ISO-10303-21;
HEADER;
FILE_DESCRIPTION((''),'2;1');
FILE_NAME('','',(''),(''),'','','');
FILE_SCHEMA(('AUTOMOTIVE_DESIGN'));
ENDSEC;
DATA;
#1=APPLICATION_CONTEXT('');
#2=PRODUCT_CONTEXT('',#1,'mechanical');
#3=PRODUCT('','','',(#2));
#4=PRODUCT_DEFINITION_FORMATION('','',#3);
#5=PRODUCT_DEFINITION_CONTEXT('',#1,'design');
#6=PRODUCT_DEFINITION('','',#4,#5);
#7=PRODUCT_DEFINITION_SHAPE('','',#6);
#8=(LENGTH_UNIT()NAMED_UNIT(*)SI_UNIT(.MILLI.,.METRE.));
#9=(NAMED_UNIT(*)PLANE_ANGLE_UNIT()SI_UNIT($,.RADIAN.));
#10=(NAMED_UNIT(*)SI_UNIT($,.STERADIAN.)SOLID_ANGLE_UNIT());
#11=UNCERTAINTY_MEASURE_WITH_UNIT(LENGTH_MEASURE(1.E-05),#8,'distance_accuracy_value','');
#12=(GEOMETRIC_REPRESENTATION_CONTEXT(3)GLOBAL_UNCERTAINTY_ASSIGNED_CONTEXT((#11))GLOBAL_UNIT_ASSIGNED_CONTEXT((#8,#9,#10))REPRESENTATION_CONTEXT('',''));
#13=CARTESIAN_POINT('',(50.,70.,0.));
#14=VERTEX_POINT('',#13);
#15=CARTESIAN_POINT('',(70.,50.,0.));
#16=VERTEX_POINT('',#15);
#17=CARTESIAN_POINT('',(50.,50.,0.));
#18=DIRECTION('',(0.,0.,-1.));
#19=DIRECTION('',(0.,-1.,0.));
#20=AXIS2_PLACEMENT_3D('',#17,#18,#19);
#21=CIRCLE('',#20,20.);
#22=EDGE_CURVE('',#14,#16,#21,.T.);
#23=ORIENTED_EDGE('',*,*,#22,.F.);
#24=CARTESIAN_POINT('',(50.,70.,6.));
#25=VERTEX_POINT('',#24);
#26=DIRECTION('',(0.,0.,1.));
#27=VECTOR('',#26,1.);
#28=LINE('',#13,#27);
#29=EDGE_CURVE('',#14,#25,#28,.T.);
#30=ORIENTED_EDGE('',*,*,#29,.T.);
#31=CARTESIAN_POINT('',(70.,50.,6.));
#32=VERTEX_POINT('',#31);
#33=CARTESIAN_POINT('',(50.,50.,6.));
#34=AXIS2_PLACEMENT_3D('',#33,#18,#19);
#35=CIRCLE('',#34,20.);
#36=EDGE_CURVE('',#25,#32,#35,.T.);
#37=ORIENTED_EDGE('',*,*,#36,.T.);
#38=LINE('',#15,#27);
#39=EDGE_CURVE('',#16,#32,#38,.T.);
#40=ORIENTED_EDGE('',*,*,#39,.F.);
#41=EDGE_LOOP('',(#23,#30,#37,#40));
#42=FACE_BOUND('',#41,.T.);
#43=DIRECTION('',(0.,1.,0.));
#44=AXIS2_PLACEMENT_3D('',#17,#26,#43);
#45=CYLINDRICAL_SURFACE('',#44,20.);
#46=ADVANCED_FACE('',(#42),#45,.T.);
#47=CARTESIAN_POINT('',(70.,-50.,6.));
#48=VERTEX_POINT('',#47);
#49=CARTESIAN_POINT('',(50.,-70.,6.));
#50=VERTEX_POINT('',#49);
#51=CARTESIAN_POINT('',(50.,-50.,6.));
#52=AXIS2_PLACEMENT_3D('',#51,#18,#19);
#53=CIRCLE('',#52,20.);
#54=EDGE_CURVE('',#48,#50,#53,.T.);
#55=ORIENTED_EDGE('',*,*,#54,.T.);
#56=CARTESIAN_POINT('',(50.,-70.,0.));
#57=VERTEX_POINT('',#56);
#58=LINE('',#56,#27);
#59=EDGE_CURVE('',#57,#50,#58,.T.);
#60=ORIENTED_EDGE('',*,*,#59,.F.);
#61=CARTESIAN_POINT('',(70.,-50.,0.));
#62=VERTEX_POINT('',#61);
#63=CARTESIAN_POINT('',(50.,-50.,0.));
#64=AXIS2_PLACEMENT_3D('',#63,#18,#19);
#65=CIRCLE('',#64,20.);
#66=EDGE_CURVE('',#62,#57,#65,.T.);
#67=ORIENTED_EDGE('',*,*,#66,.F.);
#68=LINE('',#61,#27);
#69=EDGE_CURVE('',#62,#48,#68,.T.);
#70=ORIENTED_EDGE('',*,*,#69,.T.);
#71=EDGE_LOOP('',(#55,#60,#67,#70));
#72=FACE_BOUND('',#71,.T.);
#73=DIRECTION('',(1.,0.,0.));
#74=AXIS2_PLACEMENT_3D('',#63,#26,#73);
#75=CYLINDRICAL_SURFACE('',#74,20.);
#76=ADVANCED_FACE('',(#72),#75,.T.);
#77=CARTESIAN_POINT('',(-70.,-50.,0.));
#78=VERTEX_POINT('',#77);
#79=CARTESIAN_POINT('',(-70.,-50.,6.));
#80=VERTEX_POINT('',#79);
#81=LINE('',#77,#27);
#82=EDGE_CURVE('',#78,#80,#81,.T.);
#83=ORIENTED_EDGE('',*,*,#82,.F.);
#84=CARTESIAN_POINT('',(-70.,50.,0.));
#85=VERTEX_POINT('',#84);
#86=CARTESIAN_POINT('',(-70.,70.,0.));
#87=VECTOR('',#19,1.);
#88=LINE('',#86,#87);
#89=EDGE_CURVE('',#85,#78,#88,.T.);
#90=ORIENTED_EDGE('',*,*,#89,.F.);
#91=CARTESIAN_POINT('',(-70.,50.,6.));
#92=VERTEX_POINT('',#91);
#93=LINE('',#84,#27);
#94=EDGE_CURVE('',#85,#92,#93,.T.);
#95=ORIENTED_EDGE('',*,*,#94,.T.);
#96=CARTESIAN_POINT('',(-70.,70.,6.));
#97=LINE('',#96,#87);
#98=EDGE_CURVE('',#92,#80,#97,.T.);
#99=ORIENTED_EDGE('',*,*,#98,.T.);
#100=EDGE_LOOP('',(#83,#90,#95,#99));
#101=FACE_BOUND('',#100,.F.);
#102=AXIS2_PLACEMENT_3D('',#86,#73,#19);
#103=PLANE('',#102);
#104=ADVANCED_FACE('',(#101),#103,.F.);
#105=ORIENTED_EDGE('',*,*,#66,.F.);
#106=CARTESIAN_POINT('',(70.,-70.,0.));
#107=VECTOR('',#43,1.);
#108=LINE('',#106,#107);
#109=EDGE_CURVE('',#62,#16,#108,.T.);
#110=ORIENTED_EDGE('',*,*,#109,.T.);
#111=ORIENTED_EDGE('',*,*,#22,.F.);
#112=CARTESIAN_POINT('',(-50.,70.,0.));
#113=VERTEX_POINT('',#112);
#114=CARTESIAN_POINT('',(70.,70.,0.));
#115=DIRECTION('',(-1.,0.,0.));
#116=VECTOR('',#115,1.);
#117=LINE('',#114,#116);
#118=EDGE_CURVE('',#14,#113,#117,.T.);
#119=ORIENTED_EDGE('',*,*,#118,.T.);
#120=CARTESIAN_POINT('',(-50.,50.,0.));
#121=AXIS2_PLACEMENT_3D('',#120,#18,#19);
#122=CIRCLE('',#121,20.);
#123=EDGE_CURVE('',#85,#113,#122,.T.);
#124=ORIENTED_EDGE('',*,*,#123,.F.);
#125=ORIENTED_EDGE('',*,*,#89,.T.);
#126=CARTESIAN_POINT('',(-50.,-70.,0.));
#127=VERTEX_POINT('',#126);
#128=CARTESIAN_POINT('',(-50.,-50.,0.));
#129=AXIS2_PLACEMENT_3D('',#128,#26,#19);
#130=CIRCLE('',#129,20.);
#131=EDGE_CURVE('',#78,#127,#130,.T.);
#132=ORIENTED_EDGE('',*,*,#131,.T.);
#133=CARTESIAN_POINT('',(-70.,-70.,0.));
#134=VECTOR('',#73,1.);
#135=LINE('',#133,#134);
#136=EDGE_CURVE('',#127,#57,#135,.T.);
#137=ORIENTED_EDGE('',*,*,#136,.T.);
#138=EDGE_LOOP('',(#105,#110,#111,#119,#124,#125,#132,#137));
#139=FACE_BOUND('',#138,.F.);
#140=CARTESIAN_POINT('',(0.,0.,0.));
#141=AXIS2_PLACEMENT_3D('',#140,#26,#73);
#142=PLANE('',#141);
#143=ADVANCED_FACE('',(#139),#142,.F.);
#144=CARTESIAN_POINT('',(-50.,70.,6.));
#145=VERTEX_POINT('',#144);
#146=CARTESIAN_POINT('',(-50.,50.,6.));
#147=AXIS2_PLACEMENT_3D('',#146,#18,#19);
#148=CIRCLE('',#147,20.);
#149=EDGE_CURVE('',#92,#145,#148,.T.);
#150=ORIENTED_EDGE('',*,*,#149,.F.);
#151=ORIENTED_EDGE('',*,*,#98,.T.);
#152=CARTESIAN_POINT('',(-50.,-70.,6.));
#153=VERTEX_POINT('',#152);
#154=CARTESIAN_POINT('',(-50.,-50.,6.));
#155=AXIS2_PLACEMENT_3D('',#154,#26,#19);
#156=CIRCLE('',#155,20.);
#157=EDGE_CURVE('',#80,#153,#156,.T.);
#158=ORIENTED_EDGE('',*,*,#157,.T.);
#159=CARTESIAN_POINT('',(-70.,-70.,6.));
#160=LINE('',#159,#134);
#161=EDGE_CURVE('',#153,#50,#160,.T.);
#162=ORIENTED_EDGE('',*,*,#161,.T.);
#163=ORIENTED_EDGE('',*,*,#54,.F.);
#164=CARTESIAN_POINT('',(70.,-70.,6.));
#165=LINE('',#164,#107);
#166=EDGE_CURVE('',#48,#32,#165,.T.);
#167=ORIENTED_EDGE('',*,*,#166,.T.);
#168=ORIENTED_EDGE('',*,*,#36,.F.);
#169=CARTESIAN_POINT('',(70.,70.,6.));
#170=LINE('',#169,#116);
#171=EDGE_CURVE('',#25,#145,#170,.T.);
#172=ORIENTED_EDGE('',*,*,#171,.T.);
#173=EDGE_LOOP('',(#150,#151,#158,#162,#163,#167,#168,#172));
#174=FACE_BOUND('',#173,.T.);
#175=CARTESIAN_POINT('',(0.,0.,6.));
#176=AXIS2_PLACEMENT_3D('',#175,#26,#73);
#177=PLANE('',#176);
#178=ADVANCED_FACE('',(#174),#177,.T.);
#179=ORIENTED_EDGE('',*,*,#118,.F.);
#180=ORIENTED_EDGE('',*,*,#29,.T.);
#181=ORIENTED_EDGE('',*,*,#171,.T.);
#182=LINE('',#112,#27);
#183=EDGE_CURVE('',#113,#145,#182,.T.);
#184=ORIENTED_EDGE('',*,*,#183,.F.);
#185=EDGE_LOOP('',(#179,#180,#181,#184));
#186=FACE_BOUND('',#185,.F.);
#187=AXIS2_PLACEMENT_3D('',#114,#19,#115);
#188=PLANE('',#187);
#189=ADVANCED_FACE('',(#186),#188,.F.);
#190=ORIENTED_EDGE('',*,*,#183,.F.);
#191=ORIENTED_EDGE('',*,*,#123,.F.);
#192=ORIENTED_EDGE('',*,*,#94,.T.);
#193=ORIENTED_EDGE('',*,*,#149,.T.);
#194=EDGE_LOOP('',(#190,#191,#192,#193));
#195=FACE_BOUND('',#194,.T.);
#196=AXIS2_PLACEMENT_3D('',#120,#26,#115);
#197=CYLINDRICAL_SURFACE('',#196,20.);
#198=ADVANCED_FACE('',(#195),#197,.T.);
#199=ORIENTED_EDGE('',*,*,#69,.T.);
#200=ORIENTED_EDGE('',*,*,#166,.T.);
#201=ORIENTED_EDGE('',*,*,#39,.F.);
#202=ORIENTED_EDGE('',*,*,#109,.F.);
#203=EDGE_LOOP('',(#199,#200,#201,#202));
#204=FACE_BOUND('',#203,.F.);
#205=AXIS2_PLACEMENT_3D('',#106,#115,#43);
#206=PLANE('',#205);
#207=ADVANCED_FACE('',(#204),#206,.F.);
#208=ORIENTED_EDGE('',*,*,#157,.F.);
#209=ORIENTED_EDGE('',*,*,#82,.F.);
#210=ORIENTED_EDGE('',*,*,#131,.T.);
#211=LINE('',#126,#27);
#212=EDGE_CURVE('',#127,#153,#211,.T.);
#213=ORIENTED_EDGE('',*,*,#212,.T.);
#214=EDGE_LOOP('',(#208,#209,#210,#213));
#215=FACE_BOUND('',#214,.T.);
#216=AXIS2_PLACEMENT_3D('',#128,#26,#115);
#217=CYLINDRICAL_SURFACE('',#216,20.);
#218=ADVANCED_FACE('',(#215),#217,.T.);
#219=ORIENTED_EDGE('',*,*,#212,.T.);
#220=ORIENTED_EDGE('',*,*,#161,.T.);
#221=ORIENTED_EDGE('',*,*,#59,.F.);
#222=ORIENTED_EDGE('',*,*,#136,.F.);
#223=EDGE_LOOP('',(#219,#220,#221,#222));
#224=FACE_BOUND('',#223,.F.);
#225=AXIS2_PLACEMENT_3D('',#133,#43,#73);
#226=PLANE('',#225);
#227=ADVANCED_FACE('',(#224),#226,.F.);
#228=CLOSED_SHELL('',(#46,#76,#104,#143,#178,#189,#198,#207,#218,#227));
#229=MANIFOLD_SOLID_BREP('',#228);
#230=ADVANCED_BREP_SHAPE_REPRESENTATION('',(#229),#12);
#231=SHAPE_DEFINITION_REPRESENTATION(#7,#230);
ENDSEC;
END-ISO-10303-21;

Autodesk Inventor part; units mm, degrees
ref_plane "YZ Plane" through (0, 0, 0) normal (1, 0, 0) x (0, 1, 0)
ref_plane "XZ Plane" through (0, 0, 0) normal (0, 1, 0) x (-1, 0, 0)
ref_plane "XY Plane" through (0, 0, 0) normal (0, 0, 1) x (1, 0, 0)
sketch "Sketch1" plane through (0, 0, 0) normal (0, 0, 1) x (1, 0, 0)
  line L0 (-70, -70) -> (70, -70)
  line L1 (70, -70) -> (70, 70)
  line L2 (70, 70) -> (-70, 70)
  line L3 (-70, 70) -> (-70, -70)
  line L4 (-70, -70) -> (70, 70) construction
  line L5 (70, -70) -> (-70, 70) construction
  point P0 (0, 0)
  dimension "d0" = 140
  dimension "d1" = 140
extrude "Plate1" add sketch "Sketch1" along normal blind 6
fillet "Corner Round1" radius 20 4 edges at (70, -70, 3) (-70, -70, 3) (-70, 70, 3) (70, 70, 3)
sketch "Sketch5" plane through (0, 0, 6) normal (0, 0, 1) x (1, 0, 0)
  line L0 (70, 50) -> (70, -50) projected
  line L1 (70, 40) -> (-70, 40)
  line L2 (-70, -50) -> (-70, 50) projected
  line L3 (-50, 70) -> (50, 70) projected
  point P0 (0, 0)
  dimension "d23" = 30
feature "Fold1" [suppressed]
equation "\"d0\" = d1"
equation "\"d2\" = Thickness"
equation "\"d24\" = BendReliefWidth"
equation "\"d25\" = BendReliefDepth"
equation "\"d26\" = MinimumRemnant"
equation "\"d27\" = TransitionRadius"
equation "\"d29\" = BendRadius"
equation "\"BendReliefWidth\" = Thickness"
equation "\"BendReliefDepth\" = 0.5 * Thickness"
equation "\"CornerReliefSize\" = 4 * Thickness"
equation "\"MinimumRemnant\" = 2 * Thickness"
equation "\"TransitionRadius\" = BendRadius"
equation "\"JacobiRadiusSize\" = BendRadius"
equation "\"GapSize\" = Thickness"
equation "\"Thickness\" = 6"
equation "\"BendRadius\" = 5"
properties part number "SLM 1694 leg plate for filter" material "Stainless Steel"
